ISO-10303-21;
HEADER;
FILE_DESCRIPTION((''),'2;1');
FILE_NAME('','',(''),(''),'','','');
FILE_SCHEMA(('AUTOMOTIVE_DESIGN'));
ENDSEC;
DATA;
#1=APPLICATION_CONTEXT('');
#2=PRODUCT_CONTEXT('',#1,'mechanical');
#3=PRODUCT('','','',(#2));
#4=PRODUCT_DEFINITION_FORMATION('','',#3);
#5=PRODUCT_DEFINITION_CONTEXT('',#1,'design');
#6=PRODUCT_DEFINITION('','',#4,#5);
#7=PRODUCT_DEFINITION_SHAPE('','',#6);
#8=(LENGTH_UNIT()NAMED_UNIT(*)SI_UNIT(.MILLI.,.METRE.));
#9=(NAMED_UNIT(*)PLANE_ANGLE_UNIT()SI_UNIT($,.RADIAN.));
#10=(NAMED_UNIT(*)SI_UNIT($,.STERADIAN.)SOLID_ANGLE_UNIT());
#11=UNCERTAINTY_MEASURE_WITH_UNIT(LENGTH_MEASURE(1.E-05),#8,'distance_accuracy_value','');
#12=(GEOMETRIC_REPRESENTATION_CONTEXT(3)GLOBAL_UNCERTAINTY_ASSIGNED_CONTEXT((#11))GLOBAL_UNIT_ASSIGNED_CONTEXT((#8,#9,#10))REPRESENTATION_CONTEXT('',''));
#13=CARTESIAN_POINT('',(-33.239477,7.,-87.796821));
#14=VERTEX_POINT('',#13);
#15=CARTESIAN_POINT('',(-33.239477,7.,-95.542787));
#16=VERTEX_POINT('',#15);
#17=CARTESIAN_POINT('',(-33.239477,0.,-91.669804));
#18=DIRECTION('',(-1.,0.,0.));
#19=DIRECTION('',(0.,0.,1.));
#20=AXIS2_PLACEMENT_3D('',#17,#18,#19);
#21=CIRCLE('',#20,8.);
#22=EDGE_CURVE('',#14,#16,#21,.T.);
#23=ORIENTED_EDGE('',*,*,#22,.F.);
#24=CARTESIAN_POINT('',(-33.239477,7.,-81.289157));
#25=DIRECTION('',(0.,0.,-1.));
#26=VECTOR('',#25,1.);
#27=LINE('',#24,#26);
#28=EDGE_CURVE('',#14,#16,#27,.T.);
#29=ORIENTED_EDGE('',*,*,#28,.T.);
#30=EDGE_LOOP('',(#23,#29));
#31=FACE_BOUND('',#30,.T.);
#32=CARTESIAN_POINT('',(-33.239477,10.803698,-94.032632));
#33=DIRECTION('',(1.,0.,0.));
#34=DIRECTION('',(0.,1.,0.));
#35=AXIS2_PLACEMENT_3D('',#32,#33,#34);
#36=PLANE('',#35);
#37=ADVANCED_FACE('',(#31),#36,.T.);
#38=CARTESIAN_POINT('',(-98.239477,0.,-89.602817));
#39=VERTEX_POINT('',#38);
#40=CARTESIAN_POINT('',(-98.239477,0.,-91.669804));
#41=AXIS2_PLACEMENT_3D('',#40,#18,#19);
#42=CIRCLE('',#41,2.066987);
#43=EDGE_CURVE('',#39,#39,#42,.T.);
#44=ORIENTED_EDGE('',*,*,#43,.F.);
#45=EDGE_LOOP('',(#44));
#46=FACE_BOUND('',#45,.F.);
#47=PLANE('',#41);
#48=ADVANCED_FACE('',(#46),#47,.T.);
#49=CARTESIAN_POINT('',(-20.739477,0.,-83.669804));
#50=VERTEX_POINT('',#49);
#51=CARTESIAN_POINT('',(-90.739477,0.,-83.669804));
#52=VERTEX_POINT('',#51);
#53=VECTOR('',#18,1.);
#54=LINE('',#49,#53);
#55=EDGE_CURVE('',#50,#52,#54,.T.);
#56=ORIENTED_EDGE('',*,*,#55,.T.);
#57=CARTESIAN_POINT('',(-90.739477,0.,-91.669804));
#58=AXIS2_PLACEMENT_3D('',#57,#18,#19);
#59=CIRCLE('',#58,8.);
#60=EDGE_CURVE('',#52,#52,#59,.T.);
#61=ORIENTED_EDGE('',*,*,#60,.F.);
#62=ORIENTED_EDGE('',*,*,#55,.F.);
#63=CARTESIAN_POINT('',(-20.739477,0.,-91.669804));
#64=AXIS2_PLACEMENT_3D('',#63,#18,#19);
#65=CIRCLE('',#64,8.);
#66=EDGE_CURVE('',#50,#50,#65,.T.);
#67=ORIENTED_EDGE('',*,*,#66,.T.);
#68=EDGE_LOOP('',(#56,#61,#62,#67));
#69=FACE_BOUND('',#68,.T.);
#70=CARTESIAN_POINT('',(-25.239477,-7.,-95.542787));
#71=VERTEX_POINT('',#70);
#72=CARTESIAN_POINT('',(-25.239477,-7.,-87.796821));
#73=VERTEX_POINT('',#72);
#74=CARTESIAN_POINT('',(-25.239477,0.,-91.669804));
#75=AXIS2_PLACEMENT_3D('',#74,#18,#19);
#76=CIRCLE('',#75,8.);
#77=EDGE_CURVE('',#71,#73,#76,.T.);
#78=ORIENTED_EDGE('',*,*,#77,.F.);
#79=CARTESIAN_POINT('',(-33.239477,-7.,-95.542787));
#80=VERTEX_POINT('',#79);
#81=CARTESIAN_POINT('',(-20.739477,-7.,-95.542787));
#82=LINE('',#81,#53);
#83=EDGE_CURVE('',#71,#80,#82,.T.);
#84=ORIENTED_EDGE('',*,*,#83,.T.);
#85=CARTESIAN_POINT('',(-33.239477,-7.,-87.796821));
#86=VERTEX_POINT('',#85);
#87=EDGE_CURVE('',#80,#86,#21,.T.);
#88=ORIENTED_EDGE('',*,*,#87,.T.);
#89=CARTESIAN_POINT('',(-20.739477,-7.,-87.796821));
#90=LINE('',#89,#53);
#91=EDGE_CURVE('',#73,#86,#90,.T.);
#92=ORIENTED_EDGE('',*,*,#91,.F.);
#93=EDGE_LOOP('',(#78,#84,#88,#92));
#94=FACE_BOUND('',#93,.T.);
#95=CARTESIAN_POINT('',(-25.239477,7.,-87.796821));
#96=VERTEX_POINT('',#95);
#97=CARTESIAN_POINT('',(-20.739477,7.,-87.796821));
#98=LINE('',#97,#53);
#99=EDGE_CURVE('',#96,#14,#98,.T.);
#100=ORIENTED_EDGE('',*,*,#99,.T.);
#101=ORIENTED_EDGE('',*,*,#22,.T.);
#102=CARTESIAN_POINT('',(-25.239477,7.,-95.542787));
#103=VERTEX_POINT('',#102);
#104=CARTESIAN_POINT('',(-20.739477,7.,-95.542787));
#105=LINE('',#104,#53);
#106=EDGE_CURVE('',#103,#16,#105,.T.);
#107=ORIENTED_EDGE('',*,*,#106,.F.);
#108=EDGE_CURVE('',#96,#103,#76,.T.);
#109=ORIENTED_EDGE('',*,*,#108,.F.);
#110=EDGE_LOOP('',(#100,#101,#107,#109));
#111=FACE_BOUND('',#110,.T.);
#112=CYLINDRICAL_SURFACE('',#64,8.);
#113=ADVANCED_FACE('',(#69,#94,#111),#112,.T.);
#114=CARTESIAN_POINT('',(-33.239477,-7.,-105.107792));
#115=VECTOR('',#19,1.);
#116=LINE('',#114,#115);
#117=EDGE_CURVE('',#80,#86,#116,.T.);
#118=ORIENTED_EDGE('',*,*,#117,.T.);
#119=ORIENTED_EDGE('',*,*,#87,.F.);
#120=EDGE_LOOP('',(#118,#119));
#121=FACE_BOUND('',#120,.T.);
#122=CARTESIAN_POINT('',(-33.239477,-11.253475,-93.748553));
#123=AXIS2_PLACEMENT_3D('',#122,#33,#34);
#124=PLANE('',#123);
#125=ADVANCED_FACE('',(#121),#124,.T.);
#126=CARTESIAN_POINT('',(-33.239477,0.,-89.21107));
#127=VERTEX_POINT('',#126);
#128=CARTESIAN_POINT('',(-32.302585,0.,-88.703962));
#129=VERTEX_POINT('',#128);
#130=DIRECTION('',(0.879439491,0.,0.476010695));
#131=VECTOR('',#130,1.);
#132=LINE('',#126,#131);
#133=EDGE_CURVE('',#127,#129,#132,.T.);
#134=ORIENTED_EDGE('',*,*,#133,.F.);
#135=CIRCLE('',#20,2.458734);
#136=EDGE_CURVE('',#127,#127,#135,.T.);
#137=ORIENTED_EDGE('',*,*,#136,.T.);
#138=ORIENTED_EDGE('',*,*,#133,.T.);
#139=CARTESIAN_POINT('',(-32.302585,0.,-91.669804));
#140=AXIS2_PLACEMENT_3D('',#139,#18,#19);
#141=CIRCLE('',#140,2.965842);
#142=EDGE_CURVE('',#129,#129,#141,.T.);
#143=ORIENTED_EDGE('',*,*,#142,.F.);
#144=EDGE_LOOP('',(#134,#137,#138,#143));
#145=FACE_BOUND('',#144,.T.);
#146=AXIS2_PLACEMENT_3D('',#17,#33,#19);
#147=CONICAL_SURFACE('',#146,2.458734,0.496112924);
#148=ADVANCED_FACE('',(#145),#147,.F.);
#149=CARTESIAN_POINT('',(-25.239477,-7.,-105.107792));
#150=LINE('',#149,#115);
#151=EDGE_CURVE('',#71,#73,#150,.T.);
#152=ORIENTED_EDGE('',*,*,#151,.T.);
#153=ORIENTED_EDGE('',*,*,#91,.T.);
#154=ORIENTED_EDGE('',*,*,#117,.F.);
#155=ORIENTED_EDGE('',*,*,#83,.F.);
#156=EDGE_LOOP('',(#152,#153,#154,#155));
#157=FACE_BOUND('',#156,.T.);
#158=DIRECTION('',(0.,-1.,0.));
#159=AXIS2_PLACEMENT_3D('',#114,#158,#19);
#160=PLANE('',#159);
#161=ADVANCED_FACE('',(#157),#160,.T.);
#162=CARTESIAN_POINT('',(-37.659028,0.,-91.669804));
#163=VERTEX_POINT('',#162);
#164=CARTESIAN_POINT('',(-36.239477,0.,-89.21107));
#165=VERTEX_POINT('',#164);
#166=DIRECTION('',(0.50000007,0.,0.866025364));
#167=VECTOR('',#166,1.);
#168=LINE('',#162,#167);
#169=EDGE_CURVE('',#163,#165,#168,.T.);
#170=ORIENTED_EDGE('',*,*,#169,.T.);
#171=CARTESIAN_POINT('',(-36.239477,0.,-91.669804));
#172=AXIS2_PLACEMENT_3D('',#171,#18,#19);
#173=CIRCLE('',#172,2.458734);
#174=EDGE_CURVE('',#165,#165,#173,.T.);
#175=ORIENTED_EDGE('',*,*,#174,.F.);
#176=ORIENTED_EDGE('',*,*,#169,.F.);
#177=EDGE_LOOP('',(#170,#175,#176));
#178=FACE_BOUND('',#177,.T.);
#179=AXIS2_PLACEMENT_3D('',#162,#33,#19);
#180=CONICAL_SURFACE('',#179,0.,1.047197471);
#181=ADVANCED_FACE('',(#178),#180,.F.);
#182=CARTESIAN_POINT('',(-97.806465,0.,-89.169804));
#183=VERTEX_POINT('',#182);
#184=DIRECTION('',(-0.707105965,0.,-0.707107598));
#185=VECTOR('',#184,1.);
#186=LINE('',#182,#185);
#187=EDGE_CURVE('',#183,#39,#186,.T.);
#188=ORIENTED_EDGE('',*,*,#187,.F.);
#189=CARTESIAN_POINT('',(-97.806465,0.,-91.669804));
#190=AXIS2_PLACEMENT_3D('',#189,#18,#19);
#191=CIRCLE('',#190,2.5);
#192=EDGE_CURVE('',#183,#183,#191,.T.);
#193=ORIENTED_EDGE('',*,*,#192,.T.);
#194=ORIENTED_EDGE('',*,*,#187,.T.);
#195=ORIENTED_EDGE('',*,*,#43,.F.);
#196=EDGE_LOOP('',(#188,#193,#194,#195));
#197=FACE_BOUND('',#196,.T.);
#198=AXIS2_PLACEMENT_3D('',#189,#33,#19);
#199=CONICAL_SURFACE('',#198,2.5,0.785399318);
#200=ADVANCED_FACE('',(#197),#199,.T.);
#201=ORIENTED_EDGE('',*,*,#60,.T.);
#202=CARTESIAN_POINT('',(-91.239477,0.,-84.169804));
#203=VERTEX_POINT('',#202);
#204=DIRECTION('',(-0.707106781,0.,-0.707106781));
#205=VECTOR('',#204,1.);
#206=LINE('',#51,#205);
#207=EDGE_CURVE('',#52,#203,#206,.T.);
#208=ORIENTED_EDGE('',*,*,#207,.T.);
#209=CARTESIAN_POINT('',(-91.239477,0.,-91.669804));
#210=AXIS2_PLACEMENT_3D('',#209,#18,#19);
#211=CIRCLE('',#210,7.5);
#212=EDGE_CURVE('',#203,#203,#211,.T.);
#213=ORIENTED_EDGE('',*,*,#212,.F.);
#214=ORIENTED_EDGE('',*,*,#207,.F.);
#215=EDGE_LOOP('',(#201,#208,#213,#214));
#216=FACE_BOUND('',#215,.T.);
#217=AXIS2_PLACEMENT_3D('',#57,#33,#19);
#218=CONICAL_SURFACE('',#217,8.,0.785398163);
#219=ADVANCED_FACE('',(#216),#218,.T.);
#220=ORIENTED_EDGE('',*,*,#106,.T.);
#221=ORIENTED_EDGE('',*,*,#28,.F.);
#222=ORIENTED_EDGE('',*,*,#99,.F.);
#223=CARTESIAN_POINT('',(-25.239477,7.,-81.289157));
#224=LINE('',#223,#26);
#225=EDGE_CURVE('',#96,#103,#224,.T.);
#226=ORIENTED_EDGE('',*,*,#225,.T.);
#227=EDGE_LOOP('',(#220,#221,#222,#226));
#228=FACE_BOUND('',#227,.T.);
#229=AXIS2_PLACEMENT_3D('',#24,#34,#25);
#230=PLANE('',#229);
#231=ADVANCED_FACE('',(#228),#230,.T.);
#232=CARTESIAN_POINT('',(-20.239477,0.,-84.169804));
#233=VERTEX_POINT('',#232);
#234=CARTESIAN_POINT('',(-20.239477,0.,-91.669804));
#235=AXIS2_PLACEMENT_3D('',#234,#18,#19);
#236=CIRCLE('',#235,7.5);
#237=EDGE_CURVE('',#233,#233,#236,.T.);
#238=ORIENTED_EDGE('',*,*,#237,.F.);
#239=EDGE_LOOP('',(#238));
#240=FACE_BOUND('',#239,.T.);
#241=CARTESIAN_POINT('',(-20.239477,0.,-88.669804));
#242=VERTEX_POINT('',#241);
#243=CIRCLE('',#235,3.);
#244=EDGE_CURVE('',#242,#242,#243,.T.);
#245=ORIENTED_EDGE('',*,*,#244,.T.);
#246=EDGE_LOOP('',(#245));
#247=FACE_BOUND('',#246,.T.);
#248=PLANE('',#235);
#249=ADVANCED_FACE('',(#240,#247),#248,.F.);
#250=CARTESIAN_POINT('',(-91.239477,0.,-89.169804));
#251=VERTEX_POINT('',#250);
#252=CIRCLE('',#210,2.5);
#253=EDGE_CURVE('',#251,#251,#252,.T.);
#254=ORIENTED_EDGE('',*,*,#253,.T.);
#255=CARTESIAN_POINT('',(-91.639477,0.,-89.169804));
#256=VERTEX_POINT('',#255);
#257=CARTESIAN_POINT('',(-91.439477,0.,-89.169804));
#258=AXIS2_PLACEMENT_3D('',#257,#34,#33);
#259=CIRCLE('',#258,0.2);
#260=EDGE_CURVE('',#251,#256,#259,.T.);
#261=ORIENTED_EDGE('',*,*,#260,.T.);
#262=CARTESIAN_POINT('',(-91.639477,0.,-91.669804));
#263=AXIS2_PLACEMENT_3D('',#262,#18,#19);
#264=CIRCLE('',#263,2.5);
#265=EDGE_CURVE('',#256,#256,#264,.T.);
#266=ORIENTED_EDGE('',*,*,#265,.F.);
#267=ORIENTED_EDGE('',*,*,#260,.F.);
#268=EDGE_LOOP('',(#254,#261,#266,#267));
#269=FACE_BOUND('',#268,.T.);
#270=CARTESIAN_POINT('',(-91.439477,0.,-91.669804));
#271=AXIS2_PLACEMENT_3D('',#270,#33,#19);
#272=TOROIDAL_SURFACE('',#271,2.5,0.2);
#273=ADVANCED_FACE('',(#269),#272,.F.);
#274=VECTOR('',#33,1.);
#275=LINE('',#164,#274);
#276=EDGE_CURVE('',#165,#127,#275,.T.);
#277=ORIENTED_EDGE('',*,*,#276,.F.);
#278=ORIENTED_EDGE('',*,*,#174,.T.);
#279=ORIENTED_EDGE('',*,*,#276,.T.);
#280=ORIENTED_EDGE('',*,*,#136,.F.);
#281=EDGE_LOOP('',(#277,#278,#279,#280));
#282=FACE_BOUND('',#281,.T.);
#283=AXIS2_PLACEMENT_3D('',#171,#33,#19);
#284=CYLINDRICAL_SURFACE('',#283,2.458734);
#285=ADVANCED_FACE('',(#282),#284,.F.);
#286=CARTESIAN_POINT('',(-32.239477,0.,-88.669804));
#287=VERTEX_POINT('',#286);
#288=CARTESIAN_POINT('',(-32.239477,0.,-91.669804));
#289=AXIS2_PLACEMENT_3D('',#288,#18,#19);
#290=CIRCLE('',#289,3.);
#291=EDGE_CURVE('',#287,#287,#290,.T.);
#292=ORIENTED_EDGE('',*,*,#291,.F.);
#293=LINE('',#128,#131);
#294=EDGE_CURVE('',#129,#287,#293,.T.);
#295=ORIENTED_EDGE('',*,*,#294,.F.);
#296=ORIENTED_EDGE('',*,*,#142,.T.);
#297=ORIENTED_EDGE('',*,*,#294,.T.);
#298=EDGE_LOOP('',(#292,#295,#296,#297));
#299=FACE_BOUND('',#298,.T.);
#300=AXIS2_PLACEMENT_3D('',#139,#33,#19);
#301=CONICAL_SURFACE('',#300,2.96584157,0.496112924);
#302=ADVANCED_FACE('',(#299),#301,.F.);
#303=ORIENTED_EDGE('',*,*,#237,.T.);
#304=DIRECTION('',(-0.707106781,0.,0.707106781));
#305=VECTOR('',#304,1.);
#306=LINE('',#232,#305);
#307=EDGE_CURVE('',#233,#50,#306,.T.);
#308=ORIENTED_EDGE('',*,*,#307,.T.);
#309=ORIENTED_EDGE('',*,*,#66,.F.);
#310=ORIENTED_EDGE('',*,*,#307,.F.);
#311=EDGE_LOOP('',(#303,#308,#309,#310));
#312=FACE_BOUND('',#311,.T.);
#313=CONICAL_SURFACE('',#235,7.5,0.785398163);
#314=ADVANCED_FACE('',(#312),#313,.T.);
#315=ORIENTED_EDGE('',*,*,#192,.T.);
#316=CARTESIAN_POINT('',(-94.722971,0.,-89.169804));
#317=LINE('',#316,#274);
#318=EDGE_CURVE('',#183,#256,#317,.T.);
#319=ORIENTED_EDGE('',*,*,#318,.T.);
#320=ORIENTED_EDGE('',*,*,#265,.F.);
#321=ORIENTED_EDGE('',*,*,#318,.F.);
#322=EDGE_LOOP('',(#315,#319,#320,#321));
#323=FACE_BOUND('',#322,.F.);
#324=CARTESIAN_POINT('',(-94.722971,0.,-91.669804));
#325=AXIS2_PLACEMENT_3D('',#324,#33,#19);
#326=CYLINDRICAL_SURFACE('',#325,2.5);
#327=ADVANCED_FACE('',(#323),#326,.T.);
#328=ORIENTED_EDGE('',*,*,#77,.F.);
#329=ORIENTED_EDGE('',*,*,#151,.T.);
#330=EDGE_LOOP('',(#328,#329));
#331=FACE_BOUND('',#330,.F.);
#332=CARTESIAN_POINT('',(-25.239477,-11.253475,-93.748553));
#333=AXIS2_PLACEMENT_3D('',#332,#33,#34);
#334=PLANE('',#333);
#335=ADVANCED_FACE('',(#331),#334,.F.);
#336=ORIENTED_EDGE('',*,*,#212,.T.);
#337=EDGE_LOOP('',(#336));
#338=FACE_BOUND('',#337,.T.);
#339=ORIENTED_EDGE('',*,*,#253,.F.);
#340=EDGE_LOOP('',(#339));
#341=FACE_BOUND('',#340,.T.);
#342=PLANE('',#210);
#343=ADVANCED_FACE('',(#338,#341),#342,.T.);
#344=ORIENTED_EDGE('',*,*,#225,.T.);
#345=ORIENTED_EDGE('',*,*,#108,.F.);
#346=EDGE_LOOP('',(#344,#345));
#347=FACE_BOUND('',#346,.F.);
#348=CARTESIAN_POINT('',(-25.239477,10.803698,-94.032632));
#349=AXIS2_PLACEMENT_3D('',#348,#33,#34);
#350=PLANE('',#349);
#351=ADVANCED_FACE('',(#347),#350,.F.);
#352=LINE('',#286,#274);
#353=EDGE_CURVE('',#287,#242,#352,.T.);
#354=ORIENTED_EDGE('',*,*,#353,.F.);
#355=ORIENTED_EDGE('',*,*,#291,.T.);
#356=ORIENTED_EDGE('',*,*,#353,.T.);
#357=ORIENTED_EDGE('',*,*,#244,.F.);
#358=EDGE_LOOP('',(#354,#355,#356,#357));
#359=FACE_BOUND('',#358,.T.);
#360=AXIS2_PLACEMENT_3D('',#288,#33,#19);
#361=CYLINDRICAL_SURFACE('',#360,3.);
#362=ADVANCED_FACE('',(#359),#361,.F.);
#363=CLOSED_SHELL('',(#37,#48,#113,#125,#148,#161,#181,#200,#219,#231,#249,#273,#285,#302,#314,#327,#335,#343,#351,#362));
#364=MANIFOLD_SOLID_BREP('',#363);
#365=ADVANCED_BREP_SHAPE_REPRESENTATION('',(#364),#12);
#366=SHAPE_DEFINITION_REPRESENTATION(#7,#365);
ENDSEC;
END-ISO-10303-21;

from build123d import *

# Parameters (mm, degrees)
F0_W     = 0.4
F0_H     = 2.066987
F0_W_2   = 6.166988
F0_H_2   = 0.433013
F0_W_3   = 0.433012
F4_DEPTH = 8


with BuildPart() as f1:
    # F0 (on Front) → F1 (revolve)
    with BuildSketch(Plane.XZ):
        Polygon((-25.239477, -88.669804), (-20.739477, -88.669804), (-20.739477, -83.669804), (-90.739477, -83.669804), (-90.739477, -91.669804), (-37.659028, -91.669804), (-36.239477, -89.21107), (-33.239477, -89.21107), (-33.239477, -87.796821), (-25.239477, -87.796821), align=None)
        Polygon((-26.1410899297, -88.669804), (-25.239477, -88.669804), (-25.239477, -87.796821), align=None)
        Polygon((-32.239477, -88.669804), (-26.1410899297, -88.669804), (-25.239477, -87.796821), (-33.239477, -87.796821), (-32.3025853972, -88.7039624297), align=None)
        Polygon((-33.239477, -87.796821), (-33.239477, -89.21107), (-32.3025853972, -88.7039624297), align=None)
        Polygon((-20.739477, -88.669804), (-20.239477, -88.669804), (-20.239477, -84.169804), (-20.739477, -83.669804), align=None)
        Polygon((-90.739477, -91.669804), (-90.739477, -83.669804), (-91.239477, -84.169804), (-91.239477, -87.049804), (-91.239477, -89.169804), (-91.239477, -89.602817), (-91.239477, -91.669804), align=None)
        with Locations((-91.439477, -90.6363105)):
            Rectangle(F0_W, F0_H)
        with BuildLine():
            Line((-91.639477, -89.602817), (-91.239477, -89.602817))
            Line((-91.239477, -89.602817), (-91.239477, -89.169804))
            ThreePointArc((-91.239477, -89.169804), (-91.439477, -89.369804), (-91.639477, -89.169804))
            Line((-91.639477, -89.169804), (-91.639477, -89.602817))
        make_face()
        with Locations((-94.722971, -89.3863105)):
            Rectangle(F0_W_2, F0_H_2)
        with Locations((-94.722971, -90.6363105)):
            Rectangle(F0_W_2, F0_H)
        with Locations((-98.022971, -90.6363105)):
            Rectangle(F0_W_3, F0_H)
        Polygon((-98.239477, -89.602817), (-97.806465, -89.602817), (-97.806465, -89.169804), align=None)
    revolve(axis=Axis((-57.779478, 0, -91.669804), (-1, 0, 0)))

    # F3 (on offset) → F4 (cut)
    with BuildSketch(Plane.YZ.offset(-33.239477)):
        Polygon((-7, -105.1077917218), (-7, -81.2891572714), (-14.8517033085, -81.2891572714), (-15.7914049923, -106.496937573), align=None)
        Polygon((14.2944240943, -81.2891572714), (7, -81.2891572714), (7, -105.1077917218), (14.2944240943, -107.9208105803), align=None)
    extrude(amount=F4_DEPTH, mode=Mode.SUBTRACT)


solid = f1.part
